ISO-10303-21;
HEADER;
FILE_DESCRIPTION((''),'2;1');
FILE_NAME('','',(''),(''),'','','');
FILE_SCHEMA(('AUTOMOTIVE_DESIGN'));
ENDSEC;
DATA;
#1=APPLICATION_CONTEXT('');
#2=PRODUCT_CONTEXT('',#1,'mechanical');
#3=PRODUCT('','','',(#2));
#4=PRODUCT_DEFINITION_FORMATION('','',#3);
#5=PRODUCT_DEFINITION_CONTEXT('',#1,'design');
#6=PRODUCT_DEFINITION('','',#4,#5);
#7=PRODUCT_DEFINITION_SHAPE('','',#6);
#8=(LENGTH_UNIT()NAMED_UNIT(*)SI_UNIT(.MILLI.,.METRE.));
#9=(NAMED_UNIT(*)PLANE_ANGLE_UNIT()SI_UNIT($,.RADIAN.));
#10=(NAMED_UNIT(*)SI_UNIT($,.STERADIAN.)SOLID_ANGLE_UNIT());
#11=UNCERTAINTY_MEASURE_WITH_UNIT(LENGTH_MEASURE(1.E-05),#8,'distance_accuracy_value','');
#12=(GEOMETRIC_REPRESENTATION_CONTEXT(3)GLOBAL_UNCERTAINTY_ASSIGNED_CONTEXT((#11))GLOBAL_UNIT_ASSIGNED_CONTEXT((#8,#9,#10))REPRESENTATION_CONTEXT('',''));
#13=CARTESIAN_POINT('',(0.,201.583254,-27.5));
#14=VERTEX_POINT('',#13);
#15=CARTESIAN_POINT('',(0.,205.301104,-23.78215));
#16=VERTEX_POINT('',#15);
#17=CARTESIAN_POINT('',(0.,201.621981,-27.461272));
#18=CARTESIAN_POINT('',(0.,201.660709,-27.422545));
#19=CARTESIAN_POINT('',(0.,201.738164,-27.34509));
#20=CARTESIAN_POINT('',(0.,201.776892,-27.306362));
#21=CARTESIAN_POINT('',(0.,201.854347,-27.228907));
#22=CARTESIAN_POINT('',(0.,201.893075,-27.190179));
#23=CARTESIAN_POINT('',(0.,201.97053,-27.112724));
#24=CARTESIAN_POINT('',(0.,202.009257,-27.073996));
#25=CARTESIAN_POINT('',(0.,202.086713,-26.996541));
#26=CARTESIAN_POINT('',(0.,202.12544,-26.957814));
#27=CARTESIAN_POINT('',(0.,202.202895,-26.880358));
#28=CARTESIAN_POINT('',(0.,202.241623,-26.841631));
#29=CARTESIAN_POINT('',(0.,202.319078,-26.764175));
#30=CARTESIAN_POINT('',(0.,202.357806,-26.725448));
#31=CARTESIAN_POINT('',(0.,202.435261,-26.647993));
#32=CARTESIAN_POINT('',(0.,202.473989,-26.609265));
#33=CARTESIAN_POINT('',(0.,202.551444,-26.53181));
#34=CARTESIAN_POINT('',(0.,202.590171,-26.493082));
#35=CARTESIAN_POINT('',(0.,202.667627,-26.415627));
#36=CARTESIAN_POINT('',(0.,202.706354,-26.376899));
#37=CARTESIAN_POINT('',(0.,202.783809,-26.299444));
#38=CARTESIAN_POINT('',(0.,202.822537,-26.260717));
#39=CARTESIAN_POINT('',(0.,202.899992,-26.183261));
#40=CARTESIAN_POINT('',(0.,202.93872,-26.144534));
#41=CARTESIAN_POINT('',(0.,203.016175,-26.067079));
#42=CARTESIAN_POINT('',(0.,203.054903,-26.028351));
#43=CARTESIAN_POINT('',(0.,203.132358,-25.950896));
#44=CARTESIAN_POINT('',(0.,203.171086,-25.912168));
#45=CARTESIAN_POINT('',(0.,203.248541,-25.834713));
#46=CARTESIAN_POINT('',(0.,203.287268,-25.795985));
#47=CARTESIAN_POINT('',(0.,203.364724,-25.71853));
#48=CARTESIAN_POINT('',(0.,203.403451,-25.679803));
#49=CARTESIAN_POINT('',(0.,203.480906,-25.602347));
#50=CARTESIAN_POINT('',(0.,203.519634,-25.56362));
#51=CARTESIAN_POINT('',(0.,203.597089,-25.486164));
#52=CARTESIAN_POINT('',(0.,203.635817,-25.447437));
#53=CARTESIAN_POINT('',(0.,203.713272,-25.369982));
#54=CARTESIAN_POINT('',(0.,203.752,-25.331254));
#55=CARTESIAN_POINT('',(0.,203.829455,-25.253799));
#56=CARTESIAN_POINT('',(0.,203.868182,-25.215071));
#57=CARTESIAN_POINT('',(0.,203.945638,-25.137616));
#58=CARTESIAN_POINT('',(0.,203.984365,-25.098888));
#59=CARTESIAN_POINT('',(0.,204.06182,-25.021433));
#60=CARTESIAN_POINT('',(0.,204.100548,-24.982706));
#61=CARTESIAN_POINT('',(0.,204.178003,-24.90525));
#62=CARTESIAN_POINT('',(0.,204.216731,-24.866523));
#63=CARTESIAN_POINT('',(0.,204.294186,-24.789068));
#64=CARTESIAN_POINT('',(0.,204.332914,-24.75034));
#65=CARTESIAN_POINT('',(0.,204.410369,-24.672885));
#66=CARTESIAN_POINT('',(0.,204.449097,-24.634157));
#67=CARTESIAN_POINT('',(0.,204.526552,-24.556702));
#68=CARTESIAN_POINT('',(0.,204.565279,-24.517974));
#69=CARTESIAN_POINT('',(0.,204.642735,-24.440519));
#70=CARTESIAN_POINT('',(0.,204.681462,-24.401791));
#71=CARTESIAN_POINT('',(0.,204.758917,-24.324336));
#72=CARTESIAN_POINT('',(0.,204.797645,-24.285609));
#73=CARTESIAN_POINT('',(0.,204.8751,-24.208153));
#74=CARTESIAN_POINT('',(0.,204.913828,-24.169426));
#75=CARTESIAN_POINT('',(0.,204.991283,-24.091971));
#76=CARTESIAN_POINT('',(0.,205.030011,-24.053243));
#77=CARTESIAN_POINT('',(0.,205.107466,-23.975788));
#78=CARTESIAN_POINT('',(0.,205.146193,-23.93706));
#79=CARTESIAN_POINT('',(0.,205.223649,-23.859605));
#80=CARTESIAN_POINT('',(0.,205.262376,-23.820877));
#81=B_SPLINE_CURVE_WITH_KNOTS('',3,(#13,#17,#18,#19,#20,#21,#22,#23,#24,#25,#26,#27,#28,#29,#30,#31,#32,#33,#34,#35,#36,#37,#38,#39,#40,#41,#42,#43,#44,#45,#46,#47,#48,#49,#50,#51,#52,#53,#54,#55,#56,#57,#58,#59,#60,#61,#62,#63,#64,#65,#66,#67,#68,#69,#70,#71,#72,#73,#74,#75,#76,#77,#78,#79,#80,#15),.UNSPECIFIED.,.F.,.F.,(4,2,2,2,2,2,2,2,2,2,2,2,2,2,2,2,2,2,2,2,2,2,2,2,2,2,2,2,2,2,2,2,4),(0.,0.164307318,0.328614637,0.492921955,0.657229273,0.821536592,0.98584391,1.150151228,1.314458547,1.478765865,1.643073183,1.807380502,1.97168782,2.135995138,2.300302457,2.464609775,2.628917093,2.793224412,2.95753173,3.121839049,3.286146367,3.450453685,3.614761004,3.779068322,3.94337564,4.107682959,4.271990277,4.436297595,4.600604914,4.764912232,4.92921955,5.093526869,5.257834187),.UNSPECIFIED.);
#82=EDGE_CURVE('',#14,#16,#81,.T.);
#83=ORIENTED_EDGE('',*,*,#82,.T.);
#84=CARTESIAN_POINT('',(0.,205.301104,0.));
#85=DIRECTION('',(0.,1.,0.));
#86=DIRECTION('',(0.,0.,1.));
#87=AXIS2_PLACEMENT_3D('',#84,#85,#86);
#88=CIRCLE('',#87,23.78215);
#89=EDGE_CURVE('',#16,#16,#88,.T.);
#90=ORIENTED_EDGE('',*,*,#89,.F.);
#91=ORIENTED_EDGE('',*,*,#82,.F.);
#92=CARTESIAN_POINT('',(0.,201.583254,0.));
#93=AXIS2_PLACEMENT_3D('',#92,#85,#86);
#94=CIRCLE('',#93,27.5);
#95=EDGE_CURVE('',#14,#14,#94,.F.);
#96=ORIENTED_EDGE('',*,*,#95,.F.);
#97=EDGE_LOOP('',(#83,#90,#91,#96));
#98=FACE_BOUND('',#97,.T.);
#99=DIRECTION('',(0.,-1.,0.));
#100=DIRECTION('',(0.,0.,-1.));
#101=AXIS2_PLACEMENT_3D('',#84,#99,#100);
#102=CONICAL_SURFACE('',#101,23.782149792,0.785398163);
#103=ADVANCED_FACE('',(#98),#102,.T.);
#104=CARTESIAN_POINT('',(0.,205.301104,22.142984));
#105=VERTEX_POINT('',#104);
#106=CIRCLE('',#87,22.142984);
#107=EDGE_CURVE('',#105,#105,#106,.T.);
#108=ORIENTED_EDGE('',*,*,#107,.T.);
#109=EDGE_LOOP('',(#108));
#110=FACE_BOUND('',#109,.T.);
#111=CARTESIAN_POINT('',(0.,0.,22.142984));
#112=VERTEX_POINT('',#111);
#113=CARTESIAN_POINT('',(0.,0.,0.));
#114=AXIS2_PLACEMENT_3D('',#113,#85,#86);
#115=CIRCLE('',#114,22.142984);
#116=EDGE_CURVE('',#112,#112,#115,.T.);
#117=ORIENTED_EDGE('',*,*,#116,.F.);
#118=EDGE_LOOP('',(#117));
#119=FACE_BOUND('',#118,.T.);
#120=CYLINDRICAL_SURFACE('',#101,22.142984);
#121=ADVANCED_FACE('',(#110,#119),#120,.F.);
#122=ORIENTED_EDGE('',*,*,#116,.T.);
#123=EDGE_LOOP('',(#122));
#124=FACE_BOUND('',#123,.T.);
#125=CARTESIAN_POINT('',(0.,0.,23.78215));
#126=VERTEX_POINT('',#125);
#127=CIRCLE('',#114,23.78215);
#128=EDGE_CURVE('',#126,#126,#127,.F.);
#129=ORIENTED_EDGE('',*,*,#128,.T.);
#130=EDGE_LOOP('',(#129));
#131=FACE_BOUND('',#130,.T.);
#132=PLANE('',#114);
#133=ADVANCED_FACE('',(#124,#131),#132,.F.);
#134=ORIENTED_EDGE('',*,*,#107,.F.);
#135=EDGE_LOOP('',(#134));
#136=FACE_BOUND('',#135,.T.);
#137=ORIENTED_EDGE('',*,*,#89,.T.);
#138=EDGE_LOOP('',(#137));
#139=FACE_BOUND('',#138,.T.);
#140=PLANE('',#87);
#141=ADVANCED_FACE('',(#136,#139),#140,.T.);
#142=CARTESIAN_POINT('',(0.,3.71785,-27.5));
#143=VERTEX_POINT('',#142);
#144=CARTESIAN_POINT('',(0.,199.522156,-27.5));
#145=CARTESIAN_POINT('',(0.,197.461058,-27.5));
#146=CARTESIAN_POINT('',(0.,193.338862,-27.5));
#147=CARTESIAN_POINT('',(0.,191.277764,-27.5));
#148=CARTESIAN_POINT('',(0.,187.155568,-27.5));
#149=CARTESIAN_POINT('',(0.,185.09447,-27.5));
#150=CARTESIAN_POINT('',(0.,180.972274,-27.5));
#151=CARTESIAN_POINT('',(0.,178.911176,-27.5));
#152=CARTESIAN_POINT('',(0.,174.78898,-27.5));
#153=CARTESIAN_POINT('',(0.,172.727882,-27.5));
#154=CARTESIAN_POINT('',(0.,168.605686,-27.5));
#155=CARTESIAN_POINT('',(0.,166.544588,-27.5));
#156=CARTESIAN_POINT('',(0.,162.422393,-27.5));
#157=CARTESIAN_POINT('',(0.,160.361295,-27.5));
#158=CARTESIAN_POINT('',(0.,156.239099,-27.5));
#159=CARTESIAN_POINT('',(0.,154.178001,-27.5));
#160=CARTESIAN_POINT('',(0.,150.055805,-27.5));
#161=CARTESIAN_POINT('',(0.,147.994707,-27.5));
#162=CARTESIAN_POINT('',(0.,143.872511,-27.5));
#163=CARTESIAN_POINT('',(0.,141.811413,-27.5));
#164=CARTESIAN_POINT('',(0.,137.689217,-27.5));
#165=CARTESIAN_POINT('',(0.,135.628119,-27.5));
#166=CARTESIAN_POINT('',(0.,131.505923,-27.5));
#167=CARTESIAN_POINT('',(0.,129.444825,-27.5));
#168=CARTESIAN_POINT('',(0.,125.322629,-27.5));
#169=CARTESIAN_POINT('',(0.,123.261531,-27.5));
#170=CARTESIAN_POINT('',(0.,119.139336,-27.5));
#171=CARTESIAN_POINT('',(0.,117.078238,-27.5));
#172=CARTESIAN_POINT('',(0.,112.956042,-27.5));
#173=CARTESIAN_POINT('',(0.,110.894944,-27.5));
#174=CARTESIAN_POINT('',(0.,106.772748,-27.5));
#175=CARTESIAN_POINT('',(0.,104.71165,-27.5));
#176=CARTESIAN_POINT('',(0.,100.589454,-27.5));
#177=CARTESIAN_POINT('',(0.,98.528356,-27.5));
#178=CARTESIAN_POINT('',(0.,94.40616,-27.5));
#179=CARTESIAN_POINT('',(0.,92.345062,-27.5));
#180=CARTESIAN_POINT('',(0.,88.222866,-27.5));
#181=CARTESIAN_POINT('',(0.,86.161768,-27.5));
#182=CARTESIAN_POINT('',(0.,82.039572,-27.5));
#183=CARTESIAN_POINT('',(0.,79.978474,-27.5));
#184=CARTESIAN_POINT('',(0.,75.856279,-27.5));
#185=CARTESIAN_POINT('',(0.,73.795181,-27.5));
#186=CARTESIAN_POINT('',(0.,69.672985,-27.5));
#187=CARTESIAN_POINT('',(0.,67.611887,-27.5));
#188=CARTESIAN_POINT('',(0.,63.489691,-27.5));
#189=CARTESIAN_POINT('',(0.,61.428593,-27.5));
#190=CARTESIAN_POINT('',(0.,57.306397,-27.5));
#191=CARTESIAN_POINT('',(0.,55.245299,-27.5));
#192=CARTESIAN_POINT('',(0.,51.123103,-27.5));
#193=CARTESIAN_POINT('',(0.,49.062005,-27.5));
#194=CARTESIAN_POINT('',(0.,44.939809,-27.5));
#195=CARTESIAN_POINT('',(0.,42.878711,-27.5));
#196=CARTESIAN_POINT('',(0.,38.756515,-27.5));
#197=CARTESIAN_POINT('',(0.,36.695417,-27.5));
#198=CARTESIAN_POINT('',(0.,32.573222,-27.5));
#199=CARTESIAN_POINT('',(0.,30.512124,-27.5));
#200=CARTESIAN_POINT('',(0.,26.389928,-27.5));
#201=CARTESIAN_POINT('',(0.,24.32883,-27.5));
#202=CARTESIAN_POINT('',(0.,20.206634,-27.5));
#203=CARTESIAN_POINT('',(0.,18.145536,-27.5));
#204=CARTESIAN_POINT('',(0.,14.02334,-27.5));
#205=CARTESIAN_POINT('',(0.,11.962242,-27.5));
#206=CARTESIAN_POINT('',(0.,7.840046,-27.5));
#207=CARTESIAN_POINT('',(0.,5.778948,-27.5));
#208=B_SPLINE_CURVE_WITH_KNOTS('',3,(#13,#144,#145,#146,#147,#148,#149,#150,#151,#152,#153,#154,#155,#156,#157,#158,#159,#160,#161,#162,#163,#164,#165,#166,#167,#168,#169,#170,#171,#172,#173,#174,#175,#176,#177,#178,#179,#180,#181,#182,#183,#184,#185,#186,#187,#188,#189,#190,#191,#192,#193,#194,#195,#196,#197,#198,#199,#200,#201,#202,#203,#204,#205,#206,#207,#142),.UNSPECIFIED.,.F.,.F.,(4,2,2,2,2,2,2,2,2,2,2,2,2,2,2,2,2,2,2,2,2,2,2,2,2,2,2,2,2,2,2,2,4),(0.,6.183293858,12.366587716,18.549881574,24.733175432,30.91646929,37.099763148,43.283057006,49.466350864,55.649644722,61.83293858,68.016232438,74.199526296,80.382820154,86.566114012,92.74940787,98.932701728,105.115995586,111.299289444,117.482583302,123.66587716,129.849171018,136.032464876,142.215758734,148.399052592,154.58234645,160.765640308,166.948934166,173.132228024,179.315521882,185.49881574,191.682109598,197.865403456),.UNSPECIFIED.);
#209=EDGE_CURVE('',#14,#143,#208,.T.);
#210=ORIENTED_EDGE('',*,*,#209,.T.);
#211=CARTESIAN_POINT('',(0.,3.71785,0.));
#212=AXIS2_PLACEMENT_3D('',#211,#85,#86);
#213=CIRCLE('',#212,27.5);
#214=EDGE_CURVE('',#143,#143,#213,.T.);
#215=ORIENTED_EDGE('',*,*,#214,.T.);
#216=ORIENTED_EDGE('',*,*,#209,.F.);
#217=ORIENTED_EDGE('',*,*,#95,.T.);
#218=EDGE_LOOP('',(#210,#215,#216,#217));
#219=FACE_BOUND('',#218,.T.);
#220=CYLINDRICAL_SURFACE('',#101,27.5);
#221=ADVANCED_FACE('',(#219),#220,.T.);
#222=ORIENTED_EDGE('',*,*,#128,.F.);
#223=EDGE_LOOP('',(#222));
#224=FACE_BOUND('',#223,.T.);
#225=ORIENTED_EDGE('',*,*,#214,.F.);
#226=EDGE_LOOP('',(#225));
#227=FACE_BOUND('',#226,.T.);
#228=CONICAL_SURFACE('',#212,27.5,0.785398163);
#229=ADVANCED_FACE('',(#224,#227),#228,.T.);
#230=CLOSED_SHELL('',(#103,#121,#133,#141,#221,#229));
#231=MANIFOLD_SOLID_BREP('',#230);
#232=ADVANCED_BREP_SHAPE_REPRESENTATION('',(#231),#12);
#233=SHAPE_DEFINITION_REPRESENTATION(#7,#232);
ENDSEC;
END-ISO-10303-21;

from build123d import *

# Parameters (mm, degrees)
SKETCH1_R           = 27.5
BOSS_EXTRUDE1_DEPTH = 205.301103872
SKETCH2_R           = 22.14298419
CUT_EXTRUDE1_DEPTH  = 209.952251127
CHAMFER1_SIZE       = 3.717850208


with BuildPart() as part:
    # Sketch1 → Boss-Extrude1 (new body)
    with BuildSketch(Plane(origin=(0, 0, 0), x_dir=(1, 0, 0), z_dir=(0, 1, 0))):
        Circle(SKETCH1_R)
    extrude(amount=BOSS_EXTRUDE1_DEPTH)

    # Sketch2 → Cut-Extrude1 (cut, through all)
    with BuildSketch(Plane(origin=(0, 0, 0), x_dir=(1, 0, 0), z_dir=(0, 1, 0))):
        Circle(SKETCH2_R)
    extrude(amount=CUT_EXTRUDE1_DEPTH, mode=Mode.SUBTRACT)

    # Chamfer1
    chamfer1_edges = [part.edges().sort_by_distance(p)[0] for p in [
        (-27.5, 205.301103872, 0),
        (-27.5, 0, 0),
    ]]
    chamfer(chamfer1_edges, length=CHAMFER1_SIZE)


solid = part.part
